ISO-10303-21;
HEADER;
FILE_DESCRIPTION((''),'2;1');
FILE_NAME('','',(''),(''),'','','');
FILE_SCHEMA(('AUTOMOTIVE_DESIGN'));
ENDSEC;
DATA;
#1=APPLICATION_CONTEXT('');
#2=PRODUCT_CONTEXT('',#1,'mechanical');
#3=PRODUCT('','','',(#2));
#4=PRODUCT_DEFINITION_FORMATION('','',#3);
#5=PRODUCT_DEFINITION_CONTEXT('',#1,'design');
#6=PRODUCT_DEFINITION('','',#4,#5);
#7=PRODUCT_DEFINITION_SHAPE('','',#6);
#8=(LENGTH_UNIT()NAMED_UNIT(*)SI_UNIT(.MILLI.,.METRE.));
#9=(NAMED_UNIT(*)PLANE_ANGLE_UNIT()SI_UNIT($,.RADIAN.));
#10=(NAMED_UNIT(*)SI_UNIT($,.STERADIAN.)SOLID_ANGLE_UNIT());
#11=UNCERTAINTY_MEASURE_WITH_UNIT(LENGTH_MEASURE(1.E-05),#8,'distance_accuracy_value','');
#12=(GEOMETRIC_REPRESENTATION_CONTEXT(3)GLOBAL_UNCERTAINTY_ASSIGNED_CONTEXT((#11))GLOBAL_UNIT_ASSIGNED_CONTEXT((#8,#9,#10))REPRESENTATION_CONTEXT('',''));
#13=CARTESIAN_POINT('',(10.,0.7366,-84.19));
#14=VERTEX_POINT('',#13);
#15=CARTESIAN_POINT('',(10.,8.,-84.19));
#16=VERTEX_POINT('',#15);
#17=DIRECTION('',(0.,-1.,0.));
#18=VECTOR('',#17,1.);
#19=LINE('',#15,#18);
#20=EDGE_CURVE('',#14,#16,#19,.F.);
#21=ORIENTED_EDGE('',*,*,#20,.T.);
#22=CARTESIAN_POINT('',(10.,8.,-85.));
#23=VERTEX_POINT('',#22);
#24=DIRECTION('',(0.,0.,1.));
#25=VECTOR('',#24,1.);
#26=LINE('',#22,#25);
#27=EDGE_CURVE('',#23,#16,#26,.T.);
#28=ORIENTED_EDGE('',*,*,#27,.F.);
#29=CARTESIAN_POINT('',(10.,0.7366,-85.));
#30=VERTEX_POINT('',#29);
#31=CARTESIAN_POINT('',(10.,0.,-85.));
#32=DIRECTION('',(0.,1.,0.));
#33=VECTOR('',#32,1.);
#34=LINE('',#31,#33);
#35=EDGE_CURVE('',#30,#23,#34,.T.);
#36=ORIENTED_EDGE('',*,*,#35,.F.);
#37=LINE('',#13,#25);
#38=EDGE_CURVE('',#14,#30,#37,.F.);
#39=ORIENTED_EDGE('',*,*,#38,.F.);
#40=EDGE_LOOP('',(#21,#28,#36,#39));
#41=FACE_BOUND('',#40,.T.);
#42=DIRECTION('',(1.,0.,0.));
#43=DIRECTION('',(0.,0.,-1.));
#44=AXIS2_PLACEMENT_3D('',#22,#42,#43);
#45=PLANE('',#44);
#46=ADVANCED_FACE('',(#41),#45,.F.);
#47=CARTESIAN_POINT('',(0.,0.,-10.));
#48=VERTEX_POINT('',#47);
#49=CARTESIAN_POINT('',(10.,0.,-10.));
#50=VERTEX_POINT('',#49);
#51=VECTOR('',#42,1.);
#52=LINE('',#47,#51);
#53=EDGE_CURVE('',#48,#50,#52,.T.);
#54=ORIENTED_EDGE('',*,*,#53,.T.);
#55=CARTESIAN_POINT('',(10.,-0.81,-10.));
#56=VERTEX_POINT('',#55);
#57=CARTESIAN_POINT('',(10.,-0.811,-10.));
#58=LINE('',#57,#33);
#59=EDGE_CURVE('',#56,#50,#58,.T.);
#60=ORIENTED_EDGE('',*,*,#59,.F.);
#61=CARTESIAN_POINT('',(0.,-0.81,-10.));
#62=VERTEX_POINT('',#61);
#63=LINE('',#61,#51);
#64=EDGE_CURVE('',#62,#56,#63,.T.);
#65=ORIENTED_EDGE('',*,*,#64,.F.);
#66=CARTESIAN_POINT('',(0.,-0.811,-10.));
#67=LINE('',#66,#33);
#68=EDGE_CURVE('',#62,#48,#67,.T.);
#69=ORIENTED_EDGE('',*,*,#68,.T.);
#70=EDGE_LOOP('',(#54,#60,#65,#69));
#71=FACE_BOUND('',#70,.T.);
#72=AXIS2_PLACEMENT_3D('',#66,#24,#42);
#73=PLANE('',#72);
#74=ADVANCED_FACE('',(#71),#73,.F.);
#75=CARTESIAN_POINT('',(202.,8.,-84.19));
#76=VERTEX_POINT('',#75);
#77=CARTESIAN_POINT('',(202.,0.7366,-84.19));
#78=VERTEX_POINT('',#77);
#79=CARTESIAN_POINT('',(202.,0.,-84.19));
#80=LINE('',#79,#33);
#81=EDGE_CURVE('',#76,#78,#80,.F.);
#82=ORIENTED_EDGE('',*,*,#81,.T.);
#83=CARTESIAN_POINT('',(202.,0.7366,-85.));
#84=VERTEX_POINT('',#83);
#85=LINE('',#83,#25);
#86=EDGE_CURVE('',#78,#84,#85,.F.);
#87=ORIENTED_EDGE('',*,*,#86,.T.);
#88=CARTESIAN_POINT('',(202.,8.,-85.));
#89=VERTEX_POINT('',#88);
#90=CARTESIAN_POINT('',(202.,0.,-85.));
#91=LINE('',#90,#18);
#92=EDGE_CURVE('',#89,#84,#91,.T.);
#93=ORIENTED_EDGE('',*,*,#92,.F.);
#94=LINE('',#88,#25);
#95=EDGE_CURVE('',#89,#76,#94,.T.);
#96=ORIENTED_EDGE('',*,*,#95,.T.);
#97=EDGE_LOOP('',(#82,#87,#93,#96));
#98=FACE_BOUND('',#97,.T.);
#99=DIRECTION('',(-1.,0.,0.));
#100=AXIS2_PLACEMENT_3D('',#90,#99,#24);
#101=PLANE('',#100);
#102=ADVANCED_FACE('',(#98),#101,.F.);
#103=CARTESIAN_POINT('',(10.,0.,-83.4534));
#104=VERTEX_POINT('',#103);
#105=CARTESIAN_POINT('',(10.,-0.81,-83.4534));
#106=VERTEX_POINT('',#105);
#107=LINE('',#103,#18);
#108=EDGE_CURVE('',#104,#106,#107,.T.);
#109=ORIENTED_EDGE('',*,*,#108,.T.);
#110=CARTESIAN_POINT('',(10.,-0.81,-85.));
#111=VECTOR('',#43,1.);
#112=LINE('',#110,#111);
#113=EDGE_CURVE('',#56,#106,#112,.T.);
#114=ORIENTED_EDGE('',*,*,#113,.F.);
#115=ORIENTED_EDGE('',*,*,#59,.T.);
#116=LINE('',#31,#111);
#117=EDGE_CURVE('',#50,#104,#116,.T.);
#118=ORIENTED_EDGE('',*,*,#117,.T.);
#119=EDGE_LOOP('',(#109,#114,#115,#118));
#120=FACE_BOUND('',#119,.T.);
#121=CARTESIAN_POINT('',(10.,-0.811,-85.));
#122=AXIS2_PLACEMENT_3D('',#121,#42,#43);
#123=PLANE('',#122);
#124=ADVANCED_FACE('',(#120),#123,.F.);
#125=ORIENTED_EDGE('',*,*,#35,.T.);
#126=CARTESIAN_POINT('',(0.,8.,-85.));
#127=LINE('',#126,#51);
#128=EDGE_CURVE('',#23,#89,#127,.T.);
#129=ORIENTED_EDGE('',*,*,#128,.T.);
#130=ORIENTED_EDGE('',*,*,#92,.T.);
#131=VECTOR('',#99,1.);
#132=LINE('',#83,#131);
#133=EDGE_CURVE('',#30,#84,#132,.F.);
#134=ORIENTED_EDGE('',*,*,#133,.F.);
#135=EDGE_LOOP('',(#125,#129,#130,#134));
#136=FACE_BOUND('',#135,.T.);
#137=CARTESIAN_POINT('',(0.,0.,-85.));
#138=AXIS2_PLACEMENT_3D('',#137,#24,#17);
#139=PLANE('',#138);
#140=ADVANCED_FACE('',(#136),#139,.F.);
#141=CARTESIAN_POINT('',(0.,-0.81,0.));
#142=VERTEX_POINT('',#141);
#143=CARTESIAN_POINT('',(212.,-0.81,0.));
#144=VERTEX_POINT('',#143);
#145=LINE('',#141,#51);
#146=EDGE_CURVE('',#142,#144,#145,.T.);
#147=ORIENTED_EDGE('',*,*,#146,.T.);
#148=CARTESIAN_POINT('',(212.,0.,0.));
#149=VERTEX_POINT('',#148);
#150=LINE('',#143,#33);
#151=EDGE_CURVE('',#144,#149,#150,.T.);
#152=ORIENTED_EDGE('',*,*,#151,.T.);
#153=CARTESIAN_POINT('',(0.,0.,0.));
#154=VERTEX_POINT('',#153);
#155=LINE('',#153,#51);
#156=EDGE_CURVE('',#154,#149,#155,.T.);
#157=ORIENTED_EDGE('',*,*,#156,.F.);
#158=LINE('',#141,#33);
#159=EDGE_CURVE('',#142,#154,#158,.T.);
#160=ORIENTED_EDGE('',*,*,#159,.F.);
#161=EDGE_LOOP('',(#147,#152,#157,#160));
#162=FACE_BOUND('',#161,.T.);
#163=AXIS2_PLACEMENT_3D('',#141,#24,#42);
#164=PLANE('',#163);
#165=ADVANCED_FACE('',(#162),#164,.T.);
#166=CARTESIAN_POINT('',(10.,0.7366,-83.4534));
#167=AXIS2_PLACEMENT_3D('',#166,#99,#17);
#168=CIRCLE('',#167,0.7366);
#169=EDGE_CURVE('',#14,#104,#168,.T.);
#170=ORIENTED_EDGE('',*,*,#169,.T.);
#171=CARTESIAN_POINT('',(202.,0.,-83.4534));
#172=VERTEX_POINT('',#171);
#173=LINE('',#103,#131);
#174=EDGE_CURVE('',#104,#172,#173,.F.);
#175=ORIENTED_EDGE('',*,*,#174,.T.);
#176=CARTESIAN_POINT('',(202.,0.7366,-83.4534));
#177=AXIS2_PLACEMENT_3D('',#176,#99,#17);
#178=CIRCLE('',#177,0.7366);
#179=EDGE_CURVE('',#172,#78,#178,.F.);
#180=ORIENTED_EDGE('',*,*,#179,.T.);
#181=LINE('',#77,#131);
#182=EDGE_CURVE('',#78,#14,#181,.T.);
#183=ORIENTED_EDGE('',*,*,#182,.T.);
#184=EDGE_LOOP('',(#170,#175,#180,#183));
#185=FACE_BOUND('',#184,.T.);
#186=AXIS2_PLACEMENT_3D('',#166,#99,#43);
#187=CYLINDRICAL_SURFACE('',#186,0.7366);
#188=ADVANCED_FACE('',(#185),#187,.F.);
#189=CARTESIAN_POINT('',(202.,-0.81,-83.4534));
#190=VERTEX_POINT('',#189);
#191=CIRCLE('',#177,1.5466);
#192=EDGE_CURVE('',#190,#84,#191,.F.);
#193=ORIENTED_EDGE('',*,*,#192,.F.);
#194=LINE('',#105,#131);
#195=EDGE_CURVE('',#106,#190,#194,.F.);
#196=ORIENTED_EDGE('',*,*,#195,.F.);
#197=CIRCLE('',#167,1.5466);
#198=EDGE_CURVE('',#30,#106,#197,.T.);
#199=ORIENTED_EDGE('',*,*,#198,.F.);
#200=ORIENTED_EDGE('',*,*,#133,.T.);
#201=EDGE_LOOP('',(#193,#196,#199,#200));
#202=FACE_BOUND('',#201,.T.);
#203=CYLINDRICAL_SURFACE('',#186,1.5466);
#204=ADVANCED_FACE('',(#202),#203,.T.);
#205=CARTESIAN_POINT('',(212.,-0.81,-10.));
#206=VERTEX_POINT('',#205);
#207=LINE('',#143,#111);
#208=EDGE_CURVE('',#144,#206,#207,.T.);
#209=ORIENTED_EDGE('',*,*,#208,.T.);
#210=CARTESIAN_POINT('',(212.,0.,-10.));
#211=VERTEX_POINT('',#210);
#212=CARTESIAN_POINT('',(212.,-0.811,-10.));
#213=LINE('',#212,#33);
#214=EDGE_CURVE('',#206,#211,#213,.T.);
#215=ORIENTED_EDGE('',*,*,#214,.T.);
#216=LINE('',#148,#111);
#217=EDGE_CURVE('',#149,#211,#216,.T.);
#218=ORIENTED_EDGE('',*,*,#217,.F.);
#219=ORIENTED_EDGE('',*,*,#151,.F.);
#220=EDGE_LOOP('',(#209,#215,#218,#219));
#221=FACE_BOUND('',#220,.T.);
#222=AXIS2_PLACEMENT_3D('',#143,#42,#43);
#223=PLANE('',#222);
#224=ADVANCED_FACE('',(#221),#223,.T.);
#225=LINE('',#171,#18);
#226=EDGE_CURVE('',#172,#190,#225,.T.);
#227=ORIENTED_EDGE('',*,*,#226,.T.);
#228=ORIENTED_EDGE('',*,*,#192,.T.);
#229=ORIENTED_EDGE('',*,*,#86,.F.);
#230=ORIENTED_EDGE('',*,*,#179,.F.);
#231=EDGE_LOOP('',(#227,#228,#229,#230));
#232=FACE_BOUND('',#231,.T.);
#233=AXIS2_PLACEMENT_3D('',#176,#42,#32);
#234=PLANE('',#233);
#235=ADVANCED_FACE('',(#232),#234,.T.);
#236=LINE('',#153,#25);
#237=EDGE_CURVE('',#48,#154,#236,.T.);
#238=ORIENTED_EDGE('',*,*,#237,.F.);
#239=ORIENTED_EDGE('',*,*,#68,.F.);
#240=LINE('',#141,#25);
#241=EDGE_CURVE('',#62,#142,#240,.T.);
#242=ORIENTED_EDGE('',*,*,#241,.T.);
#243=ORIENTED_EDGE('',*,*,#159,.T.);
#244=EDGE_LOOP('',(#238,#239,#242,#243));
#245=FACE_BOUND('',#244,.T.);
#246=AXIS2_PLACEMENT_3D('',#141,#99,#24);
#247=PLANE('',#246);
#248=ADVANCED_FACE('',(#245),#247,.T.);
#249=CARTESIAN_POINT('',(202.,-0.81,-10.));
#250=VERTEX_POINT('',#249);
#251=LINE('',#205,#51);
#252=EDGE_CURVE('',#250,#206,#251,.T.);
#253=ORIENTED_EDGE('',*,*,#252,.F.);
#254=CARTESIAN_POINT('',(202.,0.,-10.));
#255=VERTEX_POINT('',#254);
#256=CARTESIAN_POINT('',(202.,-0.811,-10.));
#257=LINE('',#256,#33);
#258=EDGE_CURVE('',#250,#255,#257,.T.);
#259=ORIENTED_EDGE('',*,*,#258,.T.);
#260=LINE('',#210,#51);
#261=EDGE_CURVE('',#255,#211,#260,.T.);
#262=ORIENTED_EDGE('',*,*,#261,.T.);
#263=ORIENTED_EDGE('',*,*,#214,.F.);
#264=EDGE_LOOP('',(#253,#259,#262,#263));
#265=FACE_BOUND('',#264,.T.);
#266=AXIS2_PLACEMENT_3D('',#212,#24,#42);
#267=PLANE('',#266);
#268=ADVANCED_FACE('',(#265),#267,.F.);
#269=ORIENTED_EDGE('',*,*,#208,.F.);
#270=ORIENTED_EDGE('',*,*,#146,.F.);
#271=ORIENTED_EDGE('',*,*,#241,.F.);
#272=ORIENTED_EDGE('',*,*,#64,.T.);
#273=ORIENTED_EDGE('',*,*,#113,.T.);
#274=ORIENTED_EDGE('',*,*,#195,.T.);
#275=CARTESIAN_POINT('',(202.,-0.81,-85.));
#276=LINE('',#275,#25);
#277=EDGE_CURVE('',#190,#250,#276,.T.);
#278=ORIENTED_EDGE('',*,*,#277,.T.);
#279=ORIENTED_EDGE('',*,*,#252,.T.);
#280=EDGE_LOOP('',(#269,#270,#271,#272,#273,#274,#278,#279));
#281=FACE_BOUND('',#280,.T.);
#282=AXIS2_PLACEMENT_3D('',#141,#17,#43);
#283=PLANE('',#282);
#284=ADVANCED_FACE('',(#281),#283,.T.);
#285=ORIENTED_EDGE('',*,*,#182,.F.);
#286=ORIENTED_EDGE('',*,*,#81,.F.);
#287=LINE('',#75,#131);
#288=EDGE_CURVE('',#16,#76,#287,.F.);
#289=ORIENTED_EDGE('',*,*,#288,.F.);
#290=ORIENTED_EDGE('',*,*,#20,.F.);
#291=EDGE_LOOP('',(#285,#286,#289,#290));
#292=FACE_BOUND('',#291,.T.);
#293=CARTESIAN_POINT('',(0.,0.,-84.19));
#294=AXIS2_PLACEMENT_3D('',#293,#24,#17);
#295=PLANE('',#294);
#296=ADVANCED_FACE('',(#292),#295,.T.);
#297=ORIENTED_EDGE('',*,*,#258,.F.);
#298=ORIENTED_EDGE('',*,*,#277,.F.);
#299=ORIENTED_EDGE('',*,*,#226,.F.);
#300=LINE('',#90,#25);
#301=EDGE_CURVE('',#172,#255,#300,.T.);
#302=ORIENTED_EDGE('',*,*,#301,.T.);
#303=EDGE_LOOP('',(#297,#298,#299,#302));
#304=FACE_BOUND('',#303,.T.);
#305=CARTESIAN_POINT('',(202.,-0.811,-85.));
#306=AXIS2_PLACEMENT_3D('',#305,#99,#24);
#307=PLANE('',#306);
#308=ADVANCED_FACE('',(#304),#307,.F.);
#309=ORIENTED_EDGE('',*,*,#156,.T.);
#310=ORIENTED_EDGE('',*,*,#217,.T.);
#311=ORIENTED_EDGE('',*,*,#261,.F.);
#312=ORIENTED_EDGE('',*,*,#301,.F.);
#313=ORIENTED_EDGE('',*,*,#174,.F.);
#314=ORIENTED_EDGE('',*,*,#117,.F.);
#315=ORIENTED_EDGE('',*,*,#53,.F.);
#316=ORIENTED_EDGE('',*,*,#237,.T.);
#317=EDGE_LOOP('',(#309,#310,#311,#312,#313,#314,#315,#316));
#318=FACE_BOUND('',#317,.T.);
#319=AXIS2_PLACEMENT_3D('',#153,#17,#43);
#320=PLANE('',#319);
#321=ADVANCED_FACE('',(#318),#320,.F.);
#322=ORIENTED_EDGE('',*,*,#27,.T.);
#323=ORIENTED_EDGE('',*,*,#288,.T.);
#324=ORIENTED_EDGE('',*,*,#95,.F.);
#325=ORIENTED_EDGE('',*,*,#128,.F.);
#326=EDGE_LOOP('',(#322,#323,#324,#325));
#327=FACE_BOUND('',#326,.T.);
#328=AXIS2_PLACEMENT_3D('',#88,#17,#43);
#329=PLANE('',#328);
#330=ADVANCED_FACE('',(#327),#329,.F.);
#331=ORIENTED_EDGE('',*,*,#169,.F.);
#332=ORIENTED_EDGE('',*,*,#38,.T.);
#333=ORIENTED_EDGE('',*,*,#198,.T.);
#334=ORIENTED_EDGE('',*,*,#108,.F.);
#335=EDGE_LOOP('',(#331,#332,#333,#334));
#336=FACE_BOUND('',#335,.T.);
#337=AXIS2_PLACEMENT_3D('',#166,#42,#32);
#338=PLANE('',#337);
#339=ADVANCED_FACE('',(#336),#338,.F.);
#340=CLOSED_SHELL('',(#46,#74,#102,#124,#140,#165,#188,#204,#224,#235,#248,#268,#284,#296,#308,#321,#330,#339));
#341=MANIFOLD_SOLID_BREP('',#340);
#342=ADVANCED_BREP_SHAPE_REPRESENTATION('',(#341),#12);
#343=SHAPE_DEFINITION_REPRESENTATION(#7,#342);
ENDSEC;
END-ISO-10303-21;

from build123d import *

# Parameters (mm, degrees)
SKETCH1_W                    = 212
SKETCH1_H                    = 85
BASE_FLANGE1_DEPTH           = 0.81
CUT_EXTRUDE1_REACH           = 230.407
SKETCH6_W                    = 10
SKETCH6_H                    = 75
EDGE_FLANGE1_STRIP_W         = 4.7132
EDGE_FLANGE1_STRIP_H         = 0.81
EDGE_FLANGE1_STRIP_CUT_DEPTH = 192
EDGE_FLANGE1_DEPTH           = 192


# Sheet-metal steps are written as plain solids
with BuildPart() as part:
    # Sketch1 → Base-Flange1 (new body)
    with BuildSketch(Plane(origin=(0, 0, 0), x_dir=(1, 0, 0), z_dir=(0, 1, 0))):
        with Locations((106, 42.5)):
            Rectangle(SKETCH1_W, SKETCH1_H)
    extrude(amount=-BASE_FLANGE1_DEPTH)

    # Sketch6 → Cut-Extrude1 (cut, up to next)
    with BuildSketch(Plane(origin=(0, 0, 0), x_dir=(1, 0, 0), z_dir=(0, 1, 0)), mode=Mode.PRIVATE) as cut_extrude1_sk1:
        with Locations((5, 47.5)):
            Rectangle(SKETCH6_W, SKETCH6_H)
    cut_extrude1_tool1 = extrude(cut_extrude1_sk1.sketch, amount=-CUT_EXTRUDE1_REACH, mode=Mode.PRIVATE) & part.part
    # Sketch6 → Cut-Extrude1 (cut, up to next)
    with BuildSketch(Plane(origin=(0, 0, 0), x_dir=(1, 0, 0), z_dir=(0, 1, 0)), mode=Mode.PRIVATE) as cut_extrude1_sk2:
        with Locations((207, 47.5)):
            Rectangle(SKETCH6_W, SKETCH6_H)
    cut_extrude1_tool2 = extrude(cut_extrude1_sk2.sketch, amount=-CUT_EXTRUDE1_REACH, mode=Mode.PRIVATE) & part.part
    add(cut_extrude1_tool1.solids().sort_by_distance((5, 0, -47.5))[0], mode=Mode.SUBTRACT)
    add(cut_extrude1_tool2.solids().sort_by_distance((207, 0, -47.5))[0], mode=Mode.SUBTRACT)

    # Edge-Flange1 strip (across the edge) → Edge-Flange1 strip cut (cut)
    with BuildSketch(Plane(origin=(202, 0, -85), x_dir=(0, 0, 1), z_dir=(-1, 0, 0))):
        with Locations((-0.81, -0.405)):
            Rectangle(EDGE_FLANGE1_STRIP_W, EDGE_FLANGE1_STRIP_H)
    extrude(amount=EDGE_FLANGE1_STRIP_CUT_DEPTH, mode=Mode.SUBTRACT)

    # Edge-Flange1 section (across the edge) → Edge-Flange1 (add)
    with BuildSketch(Plane(origin=(202, 0, -85), x_dir=(0, 0, 1), z_dir=(-1, 0, 0))):
        with BuildLine():
            Line((0, 0.7366), (0, 8))
            Line((0, 8), (0.81, 8))
            Line((0.81, 8), (0.81, 0.7366))
            ThreePointArc((0.81, 0.7366), (1.025745145, 0.215745145), (1.5466, 0))
            Line((1.5466, 0), (1.5466, -0.81))
            ThreePointArc((1.5466, -0.81), (0.452988652, -0.357011348), (0, 0.7366))
        make_face()
    extrude(amount=EDGE_FLANGE1_DEPTH)


solid = part.part
